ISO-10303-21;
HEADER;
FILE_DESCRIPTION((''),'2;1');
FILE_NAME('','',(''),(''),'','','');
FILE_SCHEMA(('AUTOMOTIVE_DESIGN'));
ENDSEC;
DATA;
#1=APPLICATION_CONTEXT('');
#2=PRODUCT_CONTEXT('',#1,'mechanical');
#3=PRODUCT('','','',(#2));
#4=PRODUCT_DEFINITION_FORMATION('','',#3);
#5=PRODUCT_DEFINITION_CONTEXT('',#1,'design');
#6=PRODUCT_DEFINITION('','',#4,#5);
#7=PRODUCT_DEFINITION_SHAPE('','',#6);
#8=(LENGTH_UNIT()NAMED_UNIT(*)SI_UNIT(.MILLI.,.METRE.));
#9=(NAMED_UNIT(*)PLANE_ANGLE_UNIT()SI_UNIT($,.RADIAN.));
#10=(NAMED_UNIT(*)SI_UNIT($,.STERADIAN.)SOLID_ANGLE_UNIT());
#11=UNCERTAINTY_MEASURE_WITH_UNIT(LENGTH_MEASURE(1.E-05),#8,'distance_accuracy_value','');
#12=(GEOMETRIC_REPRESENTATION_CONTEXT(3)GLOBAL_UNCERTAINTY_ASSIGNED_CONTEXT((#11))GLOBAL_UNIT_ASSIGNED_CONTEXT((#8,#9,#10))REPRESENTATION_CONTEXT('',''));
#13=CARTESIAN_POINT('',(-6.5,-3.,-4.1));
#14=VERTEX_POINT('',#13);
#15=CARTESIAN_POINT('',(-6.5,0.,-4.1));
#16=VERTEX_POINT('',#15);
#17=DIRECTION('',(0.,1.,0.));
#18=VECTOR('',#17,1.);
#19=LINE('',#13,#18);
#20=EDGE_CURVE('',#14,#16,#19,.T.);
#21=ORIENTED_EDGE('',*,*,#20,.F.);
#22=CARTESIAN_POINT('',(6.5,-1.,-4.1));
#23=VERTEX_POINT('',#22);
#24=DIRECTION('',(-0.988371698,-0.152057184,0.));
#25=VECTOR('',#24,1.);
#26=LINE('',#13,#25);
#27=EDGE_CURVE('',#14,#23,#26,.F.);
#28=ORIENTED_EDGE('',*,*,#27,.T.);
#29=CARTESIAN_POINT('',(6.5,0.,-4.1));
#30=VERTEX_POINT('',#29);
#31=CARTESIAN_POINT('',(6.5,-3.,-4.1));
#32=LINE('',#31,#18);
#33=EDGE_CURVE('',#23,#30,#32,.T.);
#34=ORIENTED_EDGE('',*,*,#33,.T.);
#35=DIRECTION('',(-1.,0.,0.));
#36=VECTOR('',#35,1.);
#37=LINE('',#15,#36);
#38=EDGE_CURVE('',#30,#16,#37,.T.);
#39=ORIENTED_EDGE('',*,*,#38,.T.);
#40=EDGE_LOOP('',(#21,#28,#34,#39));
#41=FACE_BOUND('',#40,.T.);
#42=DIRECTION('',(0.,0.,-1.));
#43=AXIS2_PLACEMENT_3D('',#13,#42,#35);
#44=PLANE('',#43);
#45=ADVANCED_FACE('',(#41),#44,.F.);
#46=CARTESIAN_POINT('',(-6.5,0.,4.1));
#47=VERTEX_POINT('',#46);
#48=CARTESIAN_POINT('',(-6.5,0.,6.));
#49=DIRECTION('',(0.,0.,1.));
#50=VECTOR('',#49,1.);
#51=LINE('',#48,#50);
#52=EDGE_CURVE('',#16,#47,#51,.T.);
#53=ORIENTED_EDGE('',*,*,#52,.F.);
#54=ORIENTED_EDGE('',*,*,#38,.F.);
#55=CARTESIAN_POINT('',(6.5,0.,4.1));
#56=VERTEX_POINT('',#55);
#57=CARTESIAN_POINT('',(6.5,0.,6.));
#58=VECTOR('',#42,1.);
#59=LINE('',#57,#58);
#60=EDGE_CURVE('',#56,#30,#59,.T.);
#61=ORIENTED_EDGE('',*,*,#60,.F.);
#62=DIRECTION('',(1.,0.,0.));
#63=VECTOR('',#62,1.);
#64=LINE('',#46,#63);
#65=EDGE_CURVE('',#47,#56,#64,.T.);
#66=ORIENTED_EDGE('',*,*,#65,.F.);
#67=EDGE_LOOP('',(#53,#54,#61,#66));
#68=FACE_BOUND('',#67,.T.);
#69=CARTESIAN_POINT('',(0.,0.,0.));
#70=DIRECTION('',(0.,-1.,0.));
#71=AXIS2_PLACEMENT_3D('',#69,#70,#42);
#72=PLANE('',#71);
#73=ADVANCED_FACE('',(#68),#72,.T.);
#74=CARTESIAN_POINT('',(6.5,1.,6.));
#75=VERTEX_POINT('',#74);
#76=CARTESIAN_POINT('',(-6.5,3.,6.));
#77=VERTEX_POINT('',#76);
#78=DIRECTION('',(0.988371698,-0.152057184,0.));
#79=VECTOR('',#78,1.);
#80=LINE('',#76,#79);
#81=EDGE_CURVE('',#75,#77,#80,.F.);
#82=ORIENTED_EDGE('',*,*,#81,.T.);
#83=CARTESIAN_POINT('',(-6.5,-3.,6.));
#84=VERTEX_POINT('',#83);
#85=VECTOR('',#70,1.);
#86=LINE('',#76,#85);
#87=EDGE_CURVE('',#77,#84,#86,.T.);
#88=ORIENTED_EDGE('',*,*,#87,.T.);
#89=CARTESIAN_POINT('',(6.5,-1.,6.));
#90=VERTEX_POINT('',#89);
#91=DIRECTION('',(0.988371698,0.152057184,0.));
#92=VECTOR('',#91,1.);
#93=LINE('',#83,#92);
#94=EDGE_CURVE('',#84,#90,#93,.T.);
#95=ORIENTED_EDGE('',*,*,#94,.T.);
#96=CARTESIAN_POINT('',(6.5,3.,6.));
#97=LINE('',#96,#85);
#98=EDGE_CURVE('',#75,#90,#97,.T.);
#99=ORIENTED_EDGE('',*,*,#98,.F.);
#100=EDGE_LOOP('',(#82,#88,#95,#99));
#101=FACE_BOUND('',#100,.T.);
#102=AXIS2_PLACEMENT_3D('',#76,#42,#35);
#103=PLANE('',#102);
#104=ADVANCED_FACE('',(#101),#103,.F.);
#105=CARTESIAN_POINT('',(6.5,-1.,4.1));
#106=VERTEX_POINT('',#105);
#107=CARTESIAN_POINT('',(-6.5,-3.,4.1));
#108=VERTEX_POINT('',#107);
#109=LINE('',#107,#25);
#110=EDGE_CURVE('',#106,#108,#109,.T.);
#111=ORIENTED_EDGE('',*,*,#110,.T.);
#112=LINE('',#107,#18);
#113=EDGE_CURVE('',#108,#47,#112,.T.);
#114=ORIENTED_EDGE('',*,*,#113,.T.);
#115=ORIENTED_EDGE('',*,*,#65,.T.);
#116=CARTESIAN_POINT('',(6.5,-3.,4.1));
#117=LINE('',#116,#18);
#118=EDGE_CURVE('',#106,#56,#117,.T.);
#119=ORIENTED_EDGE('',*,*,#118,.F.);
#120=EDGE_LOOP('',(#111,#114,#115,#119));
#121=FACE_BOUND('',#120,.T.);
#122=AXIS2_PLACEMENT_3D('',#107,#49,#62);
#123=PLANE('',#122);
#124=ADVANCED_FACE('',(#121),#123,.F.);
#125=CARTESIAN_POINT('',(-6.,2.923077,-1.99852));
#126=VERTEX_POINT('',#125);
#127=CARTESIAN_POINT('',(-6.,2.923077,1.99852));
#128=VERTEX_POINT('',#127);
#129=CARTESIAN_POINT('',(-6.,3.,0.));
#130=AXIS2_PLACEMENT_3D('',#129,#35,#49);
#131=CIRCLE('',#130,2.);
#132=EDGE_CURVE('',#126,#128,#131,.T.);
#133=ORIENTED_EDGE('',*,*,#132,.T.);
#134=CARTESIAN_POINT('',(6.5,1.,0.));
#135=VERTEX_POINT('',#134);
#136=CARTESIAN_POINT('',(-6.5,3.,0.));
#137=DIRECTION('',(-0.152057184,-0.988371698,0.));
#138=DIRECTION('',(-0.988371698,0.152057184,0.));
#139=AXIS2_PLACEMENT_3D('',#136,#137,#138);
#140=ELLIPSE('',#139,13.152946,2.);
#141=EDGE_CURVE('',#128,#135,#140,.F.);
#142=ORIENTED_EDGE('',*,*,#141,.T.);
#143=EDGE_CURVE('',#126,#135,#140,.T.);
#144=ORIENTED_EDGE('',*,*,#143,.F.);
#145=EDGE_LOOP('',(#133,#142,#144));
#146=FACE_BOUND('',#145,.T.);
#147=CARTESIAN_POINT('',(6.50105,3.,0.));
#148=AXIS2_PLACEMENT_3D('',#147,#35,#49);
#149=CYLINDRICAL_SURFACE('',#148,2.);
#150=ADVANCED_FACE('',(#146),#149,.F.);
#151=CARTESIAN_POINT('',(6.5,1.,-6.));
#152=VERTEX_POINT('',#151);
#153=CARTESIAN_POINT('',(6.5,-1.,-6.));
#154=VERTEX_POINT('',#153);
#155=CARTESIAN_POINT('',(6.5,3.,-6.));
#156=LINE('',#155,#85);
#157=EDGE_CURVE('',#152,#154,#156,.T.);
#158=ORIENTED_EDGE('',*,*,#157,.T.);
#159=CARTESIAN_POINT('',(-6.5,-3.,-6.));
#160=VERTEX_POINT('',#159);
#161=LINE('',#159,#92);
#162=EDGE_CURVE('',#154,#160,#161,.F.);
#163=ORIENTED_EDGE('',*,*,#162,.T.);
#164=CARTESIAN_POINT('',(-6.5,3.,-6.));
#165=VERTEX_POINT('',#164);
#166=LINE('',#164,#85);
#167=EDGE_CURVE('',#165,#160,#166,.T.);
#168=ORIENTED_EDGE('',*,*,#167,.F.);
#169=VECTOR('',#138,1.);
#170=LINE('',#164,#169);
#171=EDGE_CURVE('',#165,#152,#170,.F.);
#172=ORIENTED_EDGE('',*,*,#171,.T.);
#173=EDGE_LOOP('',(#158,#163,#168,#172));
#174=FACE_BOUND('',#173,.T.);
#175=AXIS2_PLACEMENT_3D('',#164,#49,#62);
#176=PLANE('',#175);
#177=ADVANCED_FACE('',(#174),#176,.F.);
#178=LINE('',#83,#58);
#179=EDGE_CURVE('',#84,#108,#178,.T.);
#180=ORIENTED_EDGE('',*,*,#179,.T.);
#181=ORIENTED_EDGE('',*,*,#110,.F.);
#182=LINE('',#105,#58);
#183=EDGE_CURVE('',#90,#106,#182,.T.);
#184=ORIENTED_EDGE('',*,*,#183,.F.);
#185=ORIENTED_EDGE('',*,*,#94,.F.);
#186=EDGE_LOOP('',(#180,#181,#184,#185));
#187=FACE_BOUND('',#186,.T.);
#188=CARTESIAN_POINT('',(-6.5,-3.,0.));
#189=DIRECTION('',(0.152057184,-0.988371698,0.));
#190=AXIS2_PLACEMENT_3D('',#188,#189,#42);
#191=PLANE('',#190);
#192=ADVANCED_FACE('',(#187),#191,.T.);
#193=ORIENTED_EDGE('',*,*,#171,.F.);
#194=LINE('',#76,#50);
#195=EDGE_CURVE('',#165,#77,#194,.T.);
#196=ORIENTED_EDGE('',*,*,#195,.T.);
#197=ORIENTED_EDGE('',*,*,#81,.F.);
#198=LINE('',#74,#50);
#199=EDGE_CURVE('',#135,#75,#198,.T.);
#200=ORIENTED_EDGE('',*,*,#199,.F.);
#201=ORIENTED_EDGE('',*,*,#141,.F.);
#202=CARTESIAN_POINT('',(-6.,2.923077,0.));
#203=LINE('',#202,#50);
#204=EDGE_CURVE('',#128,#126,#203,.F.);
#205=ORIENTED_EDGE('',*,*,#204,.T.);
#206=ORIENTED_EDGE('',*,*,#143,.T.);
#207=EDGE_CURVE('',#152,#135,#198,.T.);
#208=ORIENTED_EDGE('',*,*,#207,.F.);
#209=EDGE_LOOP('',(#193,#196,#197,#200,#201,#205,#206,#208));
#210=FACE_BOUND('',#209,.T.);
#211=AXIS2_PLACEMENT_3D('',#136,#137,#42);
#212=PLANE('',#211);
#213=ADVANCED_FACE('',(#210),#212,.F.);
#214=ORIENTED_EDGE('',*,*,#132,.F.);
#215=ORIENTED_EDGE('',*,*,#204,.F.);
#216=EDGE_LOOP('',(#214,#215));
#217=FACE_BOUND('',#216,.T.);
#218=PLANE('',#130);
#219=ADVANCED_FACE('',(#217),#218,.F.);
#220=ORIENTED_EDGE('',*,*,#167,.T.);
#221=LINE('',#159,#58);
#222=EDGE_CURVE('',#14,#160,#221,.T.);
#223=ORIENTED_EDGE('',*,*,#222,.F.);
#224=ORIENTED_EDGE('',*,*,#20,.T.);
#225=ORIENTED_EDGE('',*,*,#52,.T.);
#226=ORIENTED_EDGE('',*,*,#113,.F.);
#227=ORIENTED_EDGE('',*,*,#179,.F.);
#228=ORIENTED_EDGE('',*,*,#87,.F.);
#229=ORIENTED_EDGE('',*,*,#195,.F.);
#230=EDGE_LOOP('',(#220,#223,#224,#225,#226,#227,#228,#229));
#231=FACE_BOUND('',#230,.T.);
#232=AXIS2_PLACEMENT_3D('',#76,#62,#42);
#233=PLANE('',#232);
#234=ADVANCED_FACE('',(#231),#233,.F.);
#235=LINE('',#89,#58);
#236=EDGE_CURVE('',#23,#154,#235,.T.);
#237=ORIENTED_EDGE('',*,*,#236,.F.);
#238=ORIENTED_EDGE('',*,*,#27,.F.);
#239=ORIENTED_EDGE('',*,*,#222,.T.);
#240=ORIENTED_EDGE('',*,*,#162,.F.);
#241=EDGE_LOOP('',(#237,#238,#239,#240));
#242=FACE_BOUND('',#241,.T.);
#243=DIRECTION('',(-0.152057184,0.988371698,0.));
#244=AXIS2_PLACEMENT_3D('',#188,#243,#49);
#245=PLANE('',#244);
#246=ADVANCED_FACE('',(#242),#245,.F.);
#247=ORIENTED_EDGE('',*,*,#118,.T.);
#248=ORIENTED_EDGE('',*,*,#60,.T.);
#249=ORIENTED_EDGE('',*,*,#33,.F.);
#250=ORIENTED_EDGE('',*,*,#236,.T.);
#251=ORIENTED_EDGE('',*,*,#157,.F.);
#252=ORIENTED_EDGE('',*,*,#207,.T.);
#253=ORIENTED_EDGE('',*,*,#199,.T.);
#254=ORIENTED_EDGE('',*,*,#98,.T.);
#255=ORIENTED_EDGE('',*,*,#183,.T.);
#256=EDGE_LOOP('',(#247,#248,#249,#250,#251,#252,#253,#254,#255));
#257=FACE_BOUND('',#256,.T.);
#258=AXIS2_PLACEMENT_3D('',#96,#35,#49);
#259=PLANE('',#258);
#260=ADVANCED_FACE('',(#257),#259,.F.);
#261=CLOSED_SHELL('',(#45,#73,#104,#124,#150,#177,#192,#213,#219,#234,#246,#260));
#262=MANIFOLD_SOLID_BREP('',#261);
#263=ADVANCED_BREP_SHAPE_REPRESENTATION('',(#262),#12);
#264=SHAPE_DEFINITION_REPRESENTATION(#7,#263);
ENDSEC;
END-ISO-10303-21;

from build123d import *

# Parameters (mm, degrees)
SKETCH1_W           = 13
SKETCH1_H           = 12
BOSS_EXTRUDE1_DEPTH = 3
SKETCH2_W           = 13
SKETCH2_H           = 1.9
BOSS_EXTRUDE2_DEPTH = 3
CHAMFER1_SIZE       = 13
CHAMFER1_SIZE_2     = 2
CUT_EXTRUDE1_REACH  = 17.129
CUT_EXTRUDE1_START  = -0.5


with BuildPart() as part:
    # Sketch1 → Boss-Extrude1 (new body)
    with BuildSketch(Plane(origin=(0, 0, 0), x_dir=(1, 0, 0), z_dir=(0, 1, 0))):
        Rectangle(SKETCH1_W, SKETCH1_H)
    extrude(amount=BOSS_EXTRUDE1_DEPTH)

    # Sketch2 → Boss-Extrude2 (add)
    with BuildSketch(Plane.XZ):
        with Locations((0, 5.05)):
            Rectangle(SKETCH2_W, SKETCH2_H)
        with Locations((0, -5.05)):
            Rectangle(SKETCH2_W, SKETCH2_H)
    extrude(amount=BOSS_EXTRUDE2_DEPTH)

    # Chamfer1
    # the kernel refuses this chamfer: 13, 2 mm, written as the material it takes off along each edge
    with BuildSketch(Plane(origin=(6.5, -3, 39.785461495), x_dir=(-0.9999828835142526, -0.005850869894363576, 0), z_dir=(0, 0, -1))) as chamfer1_piece_1:
        Polygon((CHAMFER1_SIZE * 0.999982883514, CHAMFER1_SIZE * 0.00585086989436), (-CHAMFER1_SIZE_2 * 0.00585086989436, CHAMFER1_SIZE_2 * 0.999982883514), (0, 0), align=None)
    extrude(amount=69.470922991, mode=Mode.SUBTRACT)
    with BuildSketch(Plane(origin=(6.5, -3, -39.785461495), x_dir=(-0.9999828835142526, -0.005850869894363576, 0), z_dir=(0, 0, 1))) as chamfer1_piece_2:
        Polygon((CHAMFER1_SIZE * 0.999982883514, -CHAMFER1_SIZE * 0.00585086989436), (-CHAMFER1_SIZE_2 * 0.00585086989436, -CHAMFER1_SIZE_2 * 0.999982883514), (0, 0), align=None)
    extrude(amount=69.470922991, mode=Mode.SUBTRACT)
    with BuildSketch(Plane(origin=(6.5, 3, 39.785461495), x_dir=(0.23997968203750644, -0.9707779108576674, 0), z_dir=(0, 0, -1))) as chamfer1_piece_3:
        Polygon((CHAMFER1_SIZE_2 * 0.970777910858, CHAMFER1_SIZE_2 * 0.239979682038), (-CHAMFER1_SIZE * 0.239979682038, CHAMFER1_SIZE * 0.970777910858), (0, 0), align=None)
    extrude(amount=79.570922991, mode=Mode.SUBTRACT)

    # Sketch5 → Cut-Extrude1 (cut, up to next)
    with BuildSketch(Plane.ZY.offset(6.5).offset(CUT_EXTRUDE1_START), mode=Mode.PRIVATE) as cut_extrude1_sk1:
        with BuildLine():
            Line((-2, 3), (2, 3))
            ThreePointArc((2, 3), (0, 1), (-2, 3))
        make_face()
    cut_extrude1_tool1 = extrude(cut_extrude1_sk1.sketch, amount=-CUT_EXTRUDE1_REACH, mode=Mode.PRIVATE) & part.part
    add(cut_extrude1_tool1.solids().sort_by_distance((-6, 2.151174, 0))[0], mode=Mode.SUBTRACT)


solid = part.part
